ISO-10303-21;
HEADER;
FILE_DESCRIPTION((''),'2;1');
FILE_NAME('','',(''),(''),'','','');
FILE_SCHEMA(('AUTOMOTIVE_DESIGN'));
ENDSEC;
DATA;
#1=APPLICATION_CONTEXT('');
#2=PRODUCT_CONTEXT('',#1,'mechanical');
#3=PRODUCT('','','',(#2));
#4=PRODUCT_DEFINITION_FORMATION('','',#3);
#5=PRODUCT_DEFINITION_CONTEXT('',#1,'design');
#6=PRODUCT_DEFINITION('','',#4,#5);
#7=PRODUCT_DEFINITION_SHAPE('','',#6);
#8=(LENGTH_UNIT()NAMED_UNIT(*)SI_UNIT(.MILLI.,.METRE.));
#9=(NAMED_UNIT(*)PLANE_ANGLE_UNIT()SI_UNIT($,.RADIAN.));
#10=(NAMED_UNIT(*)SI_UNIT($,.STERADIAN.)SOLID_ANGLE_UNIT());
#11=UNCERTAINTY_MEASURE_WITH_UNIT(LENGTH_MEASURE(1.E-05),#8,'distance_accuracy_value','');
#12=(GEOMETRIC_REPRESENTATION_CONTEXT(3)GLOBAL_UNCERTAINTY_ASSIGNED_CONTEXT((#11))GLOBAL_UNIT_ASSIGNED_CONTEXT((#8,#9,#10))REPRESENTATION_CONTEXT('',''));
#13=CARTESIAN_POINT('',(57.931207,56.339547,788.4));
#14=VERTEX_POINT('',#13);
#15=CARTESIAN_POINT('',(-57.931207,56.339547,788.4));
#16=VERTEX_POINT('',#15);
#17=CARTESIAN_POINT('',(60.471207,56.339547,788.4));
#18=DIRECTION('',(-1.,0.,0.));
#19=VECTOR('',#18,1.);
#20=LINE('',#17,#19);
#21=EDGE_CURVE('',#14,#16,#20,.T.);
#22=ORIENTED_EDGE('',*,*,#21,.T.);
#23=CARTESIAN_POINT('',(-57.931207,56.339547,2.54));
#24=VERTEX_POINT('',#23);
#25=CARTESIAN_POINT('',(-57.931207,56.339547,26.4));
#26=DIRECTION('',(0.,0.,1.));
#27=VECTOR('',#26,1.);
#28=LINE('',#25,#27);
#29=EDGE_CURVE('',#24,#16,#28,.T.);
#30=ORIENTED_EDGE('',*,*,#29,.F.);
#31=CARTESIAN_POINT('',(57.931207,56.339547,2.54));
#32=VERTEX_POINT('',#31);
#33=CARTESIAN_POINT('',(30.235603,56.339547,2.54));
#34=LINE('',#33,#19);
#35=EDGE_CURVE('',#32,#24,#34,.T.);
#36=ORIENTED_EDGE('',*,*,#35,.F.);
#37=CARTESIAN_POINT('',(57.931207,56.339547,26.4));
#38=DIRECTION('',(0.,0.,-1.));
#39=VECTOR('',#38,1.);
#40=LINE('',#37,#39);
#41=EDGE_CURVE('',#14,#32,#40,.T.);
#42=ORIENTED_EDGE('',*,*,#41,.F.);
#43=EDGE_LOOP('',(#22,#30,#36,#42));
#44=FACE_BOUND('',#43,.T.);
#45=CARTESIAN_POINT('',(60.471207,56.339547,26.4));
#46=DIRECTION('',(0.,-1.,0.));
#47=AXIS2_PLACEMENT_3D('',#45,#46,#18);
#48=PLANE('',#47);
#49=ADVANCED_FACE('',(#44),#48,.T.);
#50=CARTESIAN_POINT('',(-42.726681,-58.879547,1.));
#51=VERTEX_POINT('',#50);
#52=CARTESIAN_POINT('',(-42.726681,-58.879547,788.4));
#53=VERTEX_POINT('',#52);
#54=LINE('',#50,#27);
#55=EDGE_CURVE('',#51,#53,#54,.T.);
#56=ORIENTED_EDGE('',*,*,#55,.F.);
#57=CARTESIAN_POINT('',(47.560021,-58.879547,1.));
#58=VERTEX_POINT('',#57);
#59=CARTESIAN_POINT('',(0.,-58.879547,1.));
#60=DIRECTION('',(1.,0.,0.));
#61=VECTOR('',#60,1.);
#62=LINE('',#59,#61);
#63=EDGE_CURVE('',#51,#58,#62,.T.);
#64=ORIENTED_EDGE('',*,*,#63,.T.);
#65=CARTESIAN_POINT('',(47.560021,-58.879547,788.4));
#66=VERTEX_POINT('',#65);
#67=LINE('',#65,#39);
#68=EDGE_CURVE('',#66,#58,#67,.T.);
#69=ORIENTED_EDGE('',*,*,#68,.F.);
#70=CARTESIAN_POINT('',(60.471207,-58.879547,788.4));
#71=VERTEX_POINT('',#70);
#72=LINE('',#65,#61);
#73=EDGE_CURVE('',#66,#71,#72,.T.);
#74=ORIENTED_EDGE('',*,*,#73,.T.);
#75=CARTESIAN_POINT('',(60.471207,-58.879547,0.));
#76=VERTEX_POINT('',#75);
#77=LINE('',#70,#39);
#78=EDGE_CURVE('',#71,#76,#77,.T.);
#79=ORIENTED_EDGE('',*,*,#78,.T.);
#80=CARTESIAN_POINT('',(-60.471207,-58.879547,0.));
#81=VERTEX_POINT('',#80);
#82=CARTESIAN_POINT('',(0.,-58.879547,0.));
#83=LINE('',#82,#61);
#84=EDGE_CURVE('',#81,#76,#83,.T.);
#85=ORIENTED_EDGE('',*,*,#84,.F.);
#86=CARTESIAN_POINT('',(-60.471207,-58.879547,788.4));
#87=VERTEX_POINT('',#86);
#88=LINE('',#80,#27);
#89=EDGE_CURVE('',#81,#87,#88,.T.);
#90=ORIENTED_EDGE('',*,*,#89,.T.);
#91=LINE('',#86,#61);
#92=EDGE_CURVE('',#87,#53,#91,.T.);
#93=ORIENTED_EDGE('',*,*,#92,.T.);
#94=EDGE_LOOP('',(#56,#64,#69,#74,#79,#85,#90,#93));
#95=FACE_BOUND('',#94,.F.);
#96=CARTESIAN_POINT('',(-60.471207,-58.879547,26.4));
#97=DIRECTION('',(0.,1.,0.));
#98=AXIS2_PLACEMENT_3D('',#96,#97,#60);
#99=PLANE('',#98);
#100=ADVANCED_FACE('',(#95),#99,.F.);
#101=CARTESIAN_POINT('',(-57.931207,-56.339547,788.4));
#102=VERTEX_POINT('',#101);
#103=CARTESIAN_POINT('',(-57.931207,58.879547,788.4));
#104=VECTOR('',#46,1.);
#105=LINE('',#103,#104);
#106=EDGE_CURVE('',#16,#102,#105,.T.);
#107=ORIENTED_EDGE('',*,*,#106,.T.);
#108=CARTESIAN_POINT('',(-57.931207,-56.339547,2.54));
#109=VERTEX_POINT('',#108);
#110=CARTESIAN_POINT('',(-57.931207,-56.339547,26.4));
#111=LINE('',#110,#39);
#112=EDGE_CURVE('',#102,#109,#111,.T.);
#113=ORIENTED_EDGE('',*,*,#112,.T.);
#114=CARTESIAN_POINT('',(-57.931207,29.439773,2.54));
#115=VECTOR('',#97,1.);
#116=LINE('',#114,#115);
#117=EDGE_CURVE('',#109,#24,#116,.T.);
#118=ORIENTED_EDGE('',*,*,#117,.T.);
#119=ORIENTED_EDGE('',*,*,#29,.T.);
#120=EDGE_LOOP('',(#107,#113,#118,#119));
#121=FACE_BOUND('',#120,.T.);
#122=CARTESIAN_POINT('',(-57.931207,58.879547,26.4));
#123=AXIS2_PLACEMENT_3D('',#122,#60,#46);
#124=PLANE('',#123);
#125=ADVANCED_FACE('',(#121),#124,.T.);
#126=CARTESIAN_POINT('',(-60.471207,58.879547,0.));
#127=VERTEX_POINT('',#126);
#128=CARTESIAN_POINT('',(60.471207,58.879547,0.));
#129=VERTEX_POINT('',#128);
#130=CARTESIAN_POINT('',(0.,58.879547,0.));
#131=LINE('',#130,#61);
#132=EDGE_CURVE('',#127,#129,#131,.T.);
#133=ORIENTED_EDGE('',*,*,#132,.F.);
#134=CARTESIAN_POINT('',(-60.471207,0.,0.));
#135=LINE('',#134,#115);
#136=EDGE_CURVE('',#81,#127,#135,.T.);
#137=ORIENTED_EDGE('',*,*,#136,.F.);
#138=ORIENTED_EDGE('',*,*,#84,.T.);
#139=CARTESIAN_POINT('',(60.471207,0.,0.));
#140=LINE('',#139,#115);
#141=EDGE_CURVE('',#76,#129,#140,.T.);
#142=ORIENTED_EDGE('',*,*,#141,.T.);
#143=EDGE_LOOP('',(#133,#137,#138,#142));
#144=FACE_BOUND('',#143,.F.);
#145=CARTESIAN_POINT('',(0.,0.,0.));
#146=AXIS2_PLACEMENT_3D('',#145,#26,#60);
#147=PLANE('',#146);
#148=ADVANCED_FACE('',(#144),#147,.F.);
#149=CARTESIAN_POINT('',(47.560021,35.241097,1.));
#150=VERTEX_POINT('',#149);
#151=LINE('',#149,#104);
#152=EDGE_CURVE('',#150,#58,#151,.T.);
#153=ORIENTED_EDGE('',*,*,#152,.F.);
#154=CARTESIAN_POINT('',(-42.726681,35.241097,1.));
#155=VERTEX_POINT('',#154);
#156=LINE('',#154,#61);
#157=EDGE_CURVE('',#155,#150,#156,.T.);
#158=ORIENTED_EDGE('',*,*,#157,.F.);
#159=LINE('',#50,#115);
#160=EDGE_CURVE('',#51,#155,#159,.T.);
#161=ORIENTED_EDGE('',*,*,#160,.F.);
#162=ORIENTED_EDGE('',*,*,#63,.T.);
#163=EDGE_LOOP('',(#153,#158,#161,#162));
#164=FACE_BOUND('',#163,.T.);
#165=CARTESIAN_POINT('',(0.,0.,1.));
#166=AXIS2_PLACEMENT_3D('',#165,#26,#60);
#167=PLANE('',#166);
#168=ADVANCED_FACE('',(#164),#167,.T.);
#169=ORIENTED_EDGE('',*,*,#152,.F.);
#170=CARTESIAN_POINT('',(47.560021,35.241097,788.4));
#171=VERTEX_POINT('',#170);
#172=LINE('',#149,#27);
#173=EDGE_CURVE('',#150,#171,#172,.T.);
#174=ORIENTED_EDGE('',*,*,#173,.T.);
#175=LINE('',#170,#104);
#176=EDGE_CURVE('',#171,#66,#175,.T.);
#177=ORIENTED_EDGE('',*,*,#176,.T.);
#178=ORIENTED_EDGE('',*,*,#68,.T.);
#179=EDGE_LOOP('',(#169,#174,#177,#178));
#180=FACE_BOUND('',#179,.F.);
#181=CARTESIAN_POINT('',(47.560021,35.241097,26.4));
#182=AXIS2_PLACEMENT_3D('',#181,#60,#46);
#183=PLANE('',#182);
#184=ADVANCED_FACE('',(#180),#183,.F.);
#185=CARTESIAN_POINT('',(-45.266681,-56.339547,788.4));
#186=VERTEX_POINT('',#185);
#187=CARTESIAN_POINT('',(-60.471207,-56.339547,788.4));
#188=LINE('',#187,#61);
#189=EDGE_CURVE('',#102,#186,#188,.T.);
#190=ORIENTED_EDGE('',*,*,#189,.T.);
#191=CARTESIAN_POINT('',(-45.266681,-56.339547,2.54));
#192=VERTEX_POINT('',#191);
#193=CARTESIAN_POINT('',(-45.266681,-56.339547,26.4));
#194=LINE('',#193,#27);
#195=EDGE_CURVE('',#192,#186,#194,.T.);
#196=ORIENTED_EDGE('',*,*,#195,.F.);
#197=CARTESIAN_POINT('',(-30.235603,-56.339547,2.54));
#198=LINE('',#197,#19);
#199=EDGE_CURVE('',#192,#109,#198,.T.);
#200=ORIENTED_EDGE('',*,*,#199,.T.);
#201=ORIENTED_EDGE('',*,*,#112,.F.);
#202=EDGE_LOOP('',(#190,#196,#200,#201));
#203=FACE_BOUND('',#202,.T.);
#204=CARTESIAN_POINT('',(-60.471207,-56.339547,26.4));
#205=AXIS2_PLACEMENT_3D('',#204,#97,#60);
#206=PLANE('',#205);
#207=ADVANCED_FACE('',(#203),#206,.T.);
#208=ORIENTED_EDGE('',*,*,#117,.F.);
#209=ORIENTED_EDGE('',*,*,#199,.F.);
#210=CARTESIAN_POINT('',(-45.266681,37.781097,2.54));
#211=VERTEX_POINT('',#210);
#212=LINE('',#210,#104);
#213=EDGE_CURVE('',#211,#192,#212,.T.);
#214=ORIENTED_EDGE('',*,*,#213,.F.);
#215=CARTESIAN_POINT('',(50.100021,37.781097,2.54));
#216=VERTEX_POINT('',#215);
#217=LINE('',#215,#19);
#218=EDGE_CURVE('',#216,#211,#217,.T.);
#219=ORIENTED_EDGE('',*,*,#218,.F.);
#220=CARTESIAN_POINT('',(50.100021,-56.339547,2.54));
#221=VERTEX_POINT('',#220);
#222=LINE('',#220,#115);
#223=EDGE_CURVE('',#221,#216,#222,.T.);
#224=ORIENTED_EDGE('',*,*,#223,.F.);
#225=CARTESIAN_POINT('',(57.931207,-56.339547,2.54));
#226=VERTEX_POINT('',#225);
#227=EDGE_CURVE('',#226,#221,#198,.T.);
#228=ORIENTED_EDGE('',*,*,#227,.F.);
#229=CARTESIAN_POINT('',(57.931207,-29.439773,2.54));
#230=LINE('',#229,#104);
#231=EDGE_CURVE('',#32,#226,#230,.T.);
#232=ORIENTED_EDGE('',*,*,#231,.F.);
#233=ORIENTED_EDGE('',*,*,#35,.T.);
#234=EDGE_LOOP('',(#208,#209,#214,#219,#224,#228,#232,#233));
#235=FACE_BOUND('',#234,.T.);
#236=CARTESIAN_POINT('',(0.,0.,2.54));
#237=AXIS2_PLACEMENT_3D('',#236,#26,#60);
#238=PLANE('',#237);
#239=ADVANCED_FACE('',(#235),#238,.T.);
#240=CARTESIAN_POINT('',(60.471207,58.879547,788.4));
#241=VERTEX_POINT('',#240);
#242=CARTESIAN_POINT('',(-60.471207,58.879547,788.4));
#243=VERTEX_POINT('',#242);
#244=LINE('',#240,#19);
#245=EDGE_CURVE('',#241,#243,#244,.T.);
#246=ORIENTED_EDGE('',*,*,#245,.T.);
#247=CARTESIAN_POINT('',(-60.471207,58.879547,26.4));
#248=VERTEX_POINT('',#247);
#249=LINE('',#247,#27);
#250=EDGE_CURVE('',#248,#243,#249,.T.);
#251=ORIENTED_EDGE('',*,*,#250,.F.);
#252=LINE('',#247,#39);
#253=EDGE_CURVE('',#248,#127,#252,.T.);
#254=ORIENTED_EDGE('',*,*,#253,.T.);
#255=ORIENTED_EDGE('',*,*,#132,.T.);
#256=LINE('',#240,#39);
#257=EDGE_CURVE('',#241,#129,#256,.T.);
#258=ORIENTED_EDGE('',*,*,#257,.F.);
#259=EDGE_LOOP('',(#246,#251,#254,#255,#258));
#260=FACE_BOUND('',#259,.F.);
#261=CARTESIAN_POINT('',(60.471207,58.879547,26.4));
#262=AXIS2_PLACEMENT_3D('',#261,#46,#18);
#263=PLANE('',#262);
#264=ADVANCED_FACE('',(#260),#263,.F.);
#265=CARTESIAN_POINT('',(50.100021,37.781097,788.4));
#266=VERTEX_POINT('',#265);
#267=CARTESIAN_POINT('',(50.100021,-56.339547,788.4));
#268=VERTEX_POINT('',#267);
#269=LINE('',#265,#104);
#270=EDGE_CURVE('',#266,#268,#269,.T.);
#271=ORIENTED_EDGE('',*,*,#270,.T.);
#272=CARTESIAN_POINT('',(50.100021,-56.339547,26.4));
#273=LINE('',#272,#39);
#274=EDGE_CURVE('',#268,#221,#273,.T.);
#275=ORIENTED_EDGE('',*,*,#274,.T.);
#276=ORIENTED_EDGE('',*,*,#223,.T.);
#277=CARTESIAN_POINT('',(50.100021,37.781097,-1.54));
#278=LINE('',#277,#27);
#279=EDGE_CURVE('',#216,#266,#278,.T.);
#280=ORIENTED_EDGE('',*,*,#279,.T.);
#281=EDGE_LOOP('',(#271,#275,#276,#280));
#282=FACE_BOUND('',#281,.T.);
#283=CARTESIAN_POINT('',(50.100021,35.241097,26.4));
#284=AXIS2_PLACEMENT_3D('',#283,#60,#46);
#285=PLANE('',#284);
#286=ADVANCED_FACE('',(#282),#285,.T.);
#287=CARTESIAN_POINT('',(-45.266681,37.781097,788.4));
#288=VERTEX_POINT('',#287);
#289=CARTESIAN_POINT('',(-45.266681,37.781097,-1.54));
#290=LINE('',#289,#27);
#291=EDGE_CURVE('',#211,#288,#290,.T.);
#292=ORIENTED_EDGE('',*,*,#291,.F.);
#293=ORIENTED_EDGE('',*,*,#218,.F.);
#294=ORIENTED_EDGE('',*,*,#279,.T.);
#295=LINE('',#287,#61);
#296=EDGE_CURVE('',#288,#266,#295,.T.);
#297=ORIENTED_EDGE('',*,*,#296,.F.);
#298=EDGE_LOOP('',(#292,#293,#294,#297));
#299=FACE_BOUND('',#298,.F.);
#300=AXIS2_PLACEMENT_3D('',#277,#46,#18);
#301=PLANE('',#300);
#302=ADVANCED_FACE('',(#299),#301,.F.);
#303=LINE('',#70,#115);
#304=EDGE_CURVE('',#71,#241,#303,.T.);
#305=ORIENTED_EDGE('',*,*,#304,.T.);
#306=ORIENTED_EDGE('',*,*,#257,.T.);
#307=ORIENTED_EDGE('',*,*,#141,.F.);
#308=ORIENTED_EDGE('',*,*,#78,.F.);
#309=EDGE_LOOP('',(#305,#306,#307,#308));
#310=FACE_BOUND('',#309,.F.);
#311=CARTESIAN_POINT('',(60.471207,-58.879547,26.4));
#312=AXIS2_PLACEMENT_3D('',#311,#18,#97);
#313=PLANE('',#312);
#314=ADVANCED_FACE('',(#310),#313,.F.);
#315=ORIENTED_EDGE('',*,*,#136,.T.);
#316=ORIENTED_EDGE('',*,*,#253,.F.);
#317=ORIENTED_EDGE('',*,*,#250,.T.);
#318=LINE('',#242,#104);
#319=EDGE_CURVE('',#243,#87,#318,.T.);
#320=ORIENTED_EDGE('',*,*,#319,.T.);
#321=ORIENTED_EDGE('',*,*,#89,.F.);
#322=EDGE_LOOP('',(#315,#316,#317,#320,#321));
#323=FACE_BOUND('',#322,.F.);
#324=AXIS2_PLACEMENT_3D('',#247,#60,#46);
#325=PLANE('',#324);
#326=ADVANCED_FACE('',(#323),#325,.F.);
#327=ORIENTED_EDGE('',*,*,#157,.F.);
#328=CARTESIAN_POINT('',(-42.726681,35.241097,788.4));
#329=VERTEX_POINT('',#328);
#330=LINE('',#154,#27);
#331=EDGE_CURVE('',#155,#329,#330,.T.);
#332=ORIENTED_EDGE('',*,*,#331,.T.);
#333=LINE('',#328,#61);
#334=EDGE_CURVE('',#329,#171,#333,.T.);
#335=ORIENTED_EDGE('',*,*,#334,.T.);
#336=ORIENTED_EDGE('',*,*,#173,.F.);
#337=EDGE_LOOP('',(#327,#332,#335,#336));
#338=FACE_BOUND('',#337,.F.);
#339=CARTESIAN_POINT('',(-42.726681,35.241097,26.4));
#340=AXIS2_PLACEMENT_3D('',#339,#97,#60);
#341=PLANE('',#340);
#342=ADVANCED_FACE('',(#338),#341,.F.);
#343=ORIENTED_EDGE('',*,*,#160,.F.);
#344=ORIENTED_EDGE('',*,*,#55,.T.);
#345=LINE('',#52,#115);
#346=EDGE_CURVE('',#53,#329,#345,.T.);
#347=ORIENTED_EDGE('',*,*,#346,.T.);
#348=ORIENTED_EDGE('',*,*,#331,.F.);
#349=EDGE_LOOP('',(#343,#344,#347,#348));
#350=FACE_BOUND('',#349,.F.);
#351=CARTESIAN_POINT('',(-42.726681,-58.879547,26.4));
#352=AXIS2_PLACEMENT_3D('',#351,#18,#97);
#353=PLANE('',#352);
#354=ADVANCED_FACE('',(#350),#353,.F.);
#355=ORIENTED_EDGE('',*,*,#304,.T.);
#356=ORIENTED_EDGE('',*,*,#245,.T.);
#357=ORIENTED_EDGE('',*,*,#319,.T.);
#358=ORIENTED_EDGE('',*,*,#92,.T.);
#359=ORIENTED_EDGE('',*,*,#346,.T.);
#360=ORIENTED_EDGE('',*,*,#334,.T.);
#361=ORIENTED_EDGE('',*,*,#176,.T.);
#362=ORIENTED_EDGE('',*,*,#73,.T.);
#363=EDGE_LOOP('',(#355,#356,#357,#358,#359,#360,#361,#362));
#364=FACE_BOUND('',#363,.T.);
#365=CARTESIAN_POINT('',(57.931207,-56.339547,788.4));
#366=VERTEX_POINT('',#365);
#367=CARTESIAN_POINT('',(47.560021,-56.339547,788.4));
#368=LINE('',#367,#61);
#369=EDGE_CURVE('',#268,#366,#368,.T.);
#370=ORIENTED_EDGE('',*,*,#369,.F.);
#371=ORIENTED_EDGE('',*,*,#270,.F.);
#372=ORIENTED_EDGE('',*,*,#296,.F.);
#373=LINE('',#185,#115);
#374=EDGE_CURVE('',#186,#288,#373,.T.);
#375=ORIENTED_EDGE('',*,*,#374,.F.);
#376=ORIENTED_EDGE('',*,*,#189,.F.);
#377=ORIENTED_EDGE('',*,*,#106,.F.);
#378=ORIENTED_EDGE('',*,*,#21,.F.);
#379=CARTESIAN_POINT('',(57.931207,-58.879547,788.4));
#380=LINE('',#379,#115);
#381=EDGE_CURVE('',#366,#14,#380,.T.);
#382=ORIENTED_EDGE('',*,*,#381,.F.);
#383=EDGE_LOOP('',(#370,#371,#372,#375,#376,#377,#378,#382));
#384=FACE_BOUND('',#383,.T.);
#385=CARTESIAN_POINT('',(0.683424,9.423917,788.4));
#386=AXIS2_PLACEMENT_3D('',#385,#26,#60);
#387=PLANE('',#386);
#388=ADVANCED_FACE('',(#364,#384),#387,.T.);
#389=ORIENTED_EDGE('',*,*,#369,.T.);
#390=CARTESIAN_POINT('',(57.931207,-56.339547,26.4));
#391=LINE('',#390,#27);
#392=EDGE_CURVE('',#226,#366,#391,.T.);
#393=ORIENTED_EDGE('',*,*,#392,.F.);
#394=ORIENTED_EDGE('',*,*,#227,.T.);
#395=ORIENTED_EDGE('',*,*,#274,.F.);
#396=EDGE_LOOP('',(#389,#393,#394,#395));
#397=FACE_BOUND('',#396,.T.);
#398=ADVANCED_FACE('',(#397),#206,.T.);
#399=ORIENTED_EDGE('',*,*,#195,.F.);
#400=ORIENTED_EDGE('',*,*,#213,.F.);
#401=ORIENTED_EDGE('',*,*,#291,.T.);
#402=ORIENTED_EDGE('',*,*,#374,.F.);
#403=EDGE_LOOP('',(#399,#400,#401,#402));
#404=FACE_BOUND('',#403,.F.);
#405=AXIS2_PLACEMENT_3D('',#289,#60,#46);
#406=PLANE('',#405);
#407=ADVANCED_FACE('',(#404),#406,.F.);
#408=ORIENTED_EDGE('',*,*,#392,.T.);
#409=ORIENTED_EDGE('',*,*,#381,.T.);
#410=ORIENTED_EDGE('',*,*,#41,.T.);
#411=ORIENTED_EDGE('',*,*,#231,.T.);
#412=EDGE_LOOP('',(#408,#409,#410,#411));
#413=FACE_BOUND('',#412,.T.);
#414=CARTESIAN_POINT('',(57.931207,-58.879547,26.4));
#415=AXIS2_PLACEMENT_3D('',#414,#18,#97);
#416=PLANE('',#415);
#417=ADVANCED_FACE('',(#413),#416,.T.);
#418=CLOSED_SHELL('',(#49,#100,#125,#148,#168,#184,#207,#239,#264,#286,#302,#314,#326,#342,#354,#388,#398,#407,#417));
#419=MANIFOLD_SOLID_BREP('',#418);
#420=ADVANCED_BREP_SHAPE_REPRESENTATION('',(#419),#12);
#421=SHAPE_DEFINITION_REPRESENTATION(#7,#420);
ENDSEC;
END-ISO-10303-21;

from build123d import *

# Parameters (mm, degrees)
F0_W        = 120.9424138069
F0_H        = 117.7590936422
F1_DEPTH    = 1
F4_DEPTH    = 25.4
F5_DEPTH    = 762
F6_T        = 2.54
F6_T3_DEPTH = 792.48
F6_T5_DEPTH = 99.200644033
F6_T7_DEPTH = 95.3667019176


# Not quite as in the source:
# - a shell that OpenCascade refuses in one call is made with other operations: the cavity is built on its own and cut out


with BuildPart() as f1:
    # F0 (on Top) → F1 (new body)
    with BuildSketch(Plane.XY):
        Rectangle(F0_W, F0_H)
    extrude(amount=F1_DEPTH)

    # F3 (on face) → F4 (join)
    with BuildSketch(Plane.XY.offset(1)):
        Polygon((-60.4712069035, 58.8795468211), (-60.4712069035, -58.8795468211), (-42.7266806364, -58.8795468211), (-42.7266806364, 35.2410972118), (47.5600212812, 35.2410972118), (47.5600212812, -58.8795468211), (60.4712069035, -58.8795468211), (60.4712069035, 58.8795468211), align=None)
    extrude(amount=F4_DEPTH)

    # F5 (add): a face of the model
    f5_faces = [f1.faces().sort_by_distance(p)[0] for p in [
        (-58.7831822711, 0, 26.4),
    ]]
    extrude(f5_faces, amount=F5_DEPTH)

    # F6: shell of thickness 2.54, made by hand


with BuildPart() as f6_core1:
    # F6_t2: copy of F1
    add(f1.part)

    # the walls: a layer under each face that stays
    f6_faces = [f6_core1.faces().sort_by_distance(p)[0] for p in [
        (0, 58.8795468211, 394.2),
        (0, 0, 0),
        (-51.8324630601, -58.8795468211, 732.0857142857),
        (47.5600212812, -11.8192248046, 394.7),
        (2.4166703224, 35.2410972118, 394.7),
        (2.4166703224, -11.8192248046, 1),
        (-42.7266806364, -11.8192248046, 394.7),
        (-60.4712069035, 0, 394.2),
        (60.4712069035, 0, 394.2),
    ]]
    thicken(f6_faces, amount=-F6_T, mode=Mode.SUBTRACT)

    # F6_s4 → F6_t3 (cut)
    with BuildSketch(Plane.XY.offset(-1.54)):
        Polygon((47.5346212812, 35.2156972118), (50.1000212812, 35.2410972118), (50.1000212812, 37.7810972118), (47.5600212812, 37.7810972118), align=None)
        Polygon((-42.7012806364, 35.2156972118), (-42.7266806364, 37.7810972118), (-45.2666806364, 37.7810972118), (-45.2666806364, 35.2410972118), align=None)
    extrude(amount=F6_T3_DEPTH, mode=Mode.SUBTRACT)

    # F6_s6 → F6_t5 (cut)
    with BuildSketch(Plane.XZ.offset(-37.7810972118)):
        Polygon((47.5346212812, 1.0254), (50.1000212812, 1), (50.1000212812, -1.54), (47.5600212812, -1.54), align=None)
        Polygon((-42.7012806364, 1.0254), (-42.7266806364, -1.54), (-45.2666806364, -1.54), (-45.2666806364, 1), align=None)
    extrude(amount=F6_T5_DEPTH, mode=Mode.SUBTRACT)

    # F6_s8 → F6_t7 (cut)
    with BuildSketch(Plane.YZ.offset(-45.2666806364)):
        Polygon((35.2156972118, 1.0254), (37.7810972118, 1), (37.7810972118, -1.54), (35.2410972118, -1.54), align=None)
    extrude(amount=F6_T7_DEPTH, mode=Mode.SUBTRACT)


with BuildPart() as f1_1:
    add(f1.part)

    # what is left inside the walls is the cavity
    f6_cavity = [f6_core1.part.solids().sort_by_distance(p)[0] for p in [
        (0, 56.314147, 526.446667),
    ]]
    add(f6_cavity, mode=Mode.SUBTRACT)


solid = f1_1.part
